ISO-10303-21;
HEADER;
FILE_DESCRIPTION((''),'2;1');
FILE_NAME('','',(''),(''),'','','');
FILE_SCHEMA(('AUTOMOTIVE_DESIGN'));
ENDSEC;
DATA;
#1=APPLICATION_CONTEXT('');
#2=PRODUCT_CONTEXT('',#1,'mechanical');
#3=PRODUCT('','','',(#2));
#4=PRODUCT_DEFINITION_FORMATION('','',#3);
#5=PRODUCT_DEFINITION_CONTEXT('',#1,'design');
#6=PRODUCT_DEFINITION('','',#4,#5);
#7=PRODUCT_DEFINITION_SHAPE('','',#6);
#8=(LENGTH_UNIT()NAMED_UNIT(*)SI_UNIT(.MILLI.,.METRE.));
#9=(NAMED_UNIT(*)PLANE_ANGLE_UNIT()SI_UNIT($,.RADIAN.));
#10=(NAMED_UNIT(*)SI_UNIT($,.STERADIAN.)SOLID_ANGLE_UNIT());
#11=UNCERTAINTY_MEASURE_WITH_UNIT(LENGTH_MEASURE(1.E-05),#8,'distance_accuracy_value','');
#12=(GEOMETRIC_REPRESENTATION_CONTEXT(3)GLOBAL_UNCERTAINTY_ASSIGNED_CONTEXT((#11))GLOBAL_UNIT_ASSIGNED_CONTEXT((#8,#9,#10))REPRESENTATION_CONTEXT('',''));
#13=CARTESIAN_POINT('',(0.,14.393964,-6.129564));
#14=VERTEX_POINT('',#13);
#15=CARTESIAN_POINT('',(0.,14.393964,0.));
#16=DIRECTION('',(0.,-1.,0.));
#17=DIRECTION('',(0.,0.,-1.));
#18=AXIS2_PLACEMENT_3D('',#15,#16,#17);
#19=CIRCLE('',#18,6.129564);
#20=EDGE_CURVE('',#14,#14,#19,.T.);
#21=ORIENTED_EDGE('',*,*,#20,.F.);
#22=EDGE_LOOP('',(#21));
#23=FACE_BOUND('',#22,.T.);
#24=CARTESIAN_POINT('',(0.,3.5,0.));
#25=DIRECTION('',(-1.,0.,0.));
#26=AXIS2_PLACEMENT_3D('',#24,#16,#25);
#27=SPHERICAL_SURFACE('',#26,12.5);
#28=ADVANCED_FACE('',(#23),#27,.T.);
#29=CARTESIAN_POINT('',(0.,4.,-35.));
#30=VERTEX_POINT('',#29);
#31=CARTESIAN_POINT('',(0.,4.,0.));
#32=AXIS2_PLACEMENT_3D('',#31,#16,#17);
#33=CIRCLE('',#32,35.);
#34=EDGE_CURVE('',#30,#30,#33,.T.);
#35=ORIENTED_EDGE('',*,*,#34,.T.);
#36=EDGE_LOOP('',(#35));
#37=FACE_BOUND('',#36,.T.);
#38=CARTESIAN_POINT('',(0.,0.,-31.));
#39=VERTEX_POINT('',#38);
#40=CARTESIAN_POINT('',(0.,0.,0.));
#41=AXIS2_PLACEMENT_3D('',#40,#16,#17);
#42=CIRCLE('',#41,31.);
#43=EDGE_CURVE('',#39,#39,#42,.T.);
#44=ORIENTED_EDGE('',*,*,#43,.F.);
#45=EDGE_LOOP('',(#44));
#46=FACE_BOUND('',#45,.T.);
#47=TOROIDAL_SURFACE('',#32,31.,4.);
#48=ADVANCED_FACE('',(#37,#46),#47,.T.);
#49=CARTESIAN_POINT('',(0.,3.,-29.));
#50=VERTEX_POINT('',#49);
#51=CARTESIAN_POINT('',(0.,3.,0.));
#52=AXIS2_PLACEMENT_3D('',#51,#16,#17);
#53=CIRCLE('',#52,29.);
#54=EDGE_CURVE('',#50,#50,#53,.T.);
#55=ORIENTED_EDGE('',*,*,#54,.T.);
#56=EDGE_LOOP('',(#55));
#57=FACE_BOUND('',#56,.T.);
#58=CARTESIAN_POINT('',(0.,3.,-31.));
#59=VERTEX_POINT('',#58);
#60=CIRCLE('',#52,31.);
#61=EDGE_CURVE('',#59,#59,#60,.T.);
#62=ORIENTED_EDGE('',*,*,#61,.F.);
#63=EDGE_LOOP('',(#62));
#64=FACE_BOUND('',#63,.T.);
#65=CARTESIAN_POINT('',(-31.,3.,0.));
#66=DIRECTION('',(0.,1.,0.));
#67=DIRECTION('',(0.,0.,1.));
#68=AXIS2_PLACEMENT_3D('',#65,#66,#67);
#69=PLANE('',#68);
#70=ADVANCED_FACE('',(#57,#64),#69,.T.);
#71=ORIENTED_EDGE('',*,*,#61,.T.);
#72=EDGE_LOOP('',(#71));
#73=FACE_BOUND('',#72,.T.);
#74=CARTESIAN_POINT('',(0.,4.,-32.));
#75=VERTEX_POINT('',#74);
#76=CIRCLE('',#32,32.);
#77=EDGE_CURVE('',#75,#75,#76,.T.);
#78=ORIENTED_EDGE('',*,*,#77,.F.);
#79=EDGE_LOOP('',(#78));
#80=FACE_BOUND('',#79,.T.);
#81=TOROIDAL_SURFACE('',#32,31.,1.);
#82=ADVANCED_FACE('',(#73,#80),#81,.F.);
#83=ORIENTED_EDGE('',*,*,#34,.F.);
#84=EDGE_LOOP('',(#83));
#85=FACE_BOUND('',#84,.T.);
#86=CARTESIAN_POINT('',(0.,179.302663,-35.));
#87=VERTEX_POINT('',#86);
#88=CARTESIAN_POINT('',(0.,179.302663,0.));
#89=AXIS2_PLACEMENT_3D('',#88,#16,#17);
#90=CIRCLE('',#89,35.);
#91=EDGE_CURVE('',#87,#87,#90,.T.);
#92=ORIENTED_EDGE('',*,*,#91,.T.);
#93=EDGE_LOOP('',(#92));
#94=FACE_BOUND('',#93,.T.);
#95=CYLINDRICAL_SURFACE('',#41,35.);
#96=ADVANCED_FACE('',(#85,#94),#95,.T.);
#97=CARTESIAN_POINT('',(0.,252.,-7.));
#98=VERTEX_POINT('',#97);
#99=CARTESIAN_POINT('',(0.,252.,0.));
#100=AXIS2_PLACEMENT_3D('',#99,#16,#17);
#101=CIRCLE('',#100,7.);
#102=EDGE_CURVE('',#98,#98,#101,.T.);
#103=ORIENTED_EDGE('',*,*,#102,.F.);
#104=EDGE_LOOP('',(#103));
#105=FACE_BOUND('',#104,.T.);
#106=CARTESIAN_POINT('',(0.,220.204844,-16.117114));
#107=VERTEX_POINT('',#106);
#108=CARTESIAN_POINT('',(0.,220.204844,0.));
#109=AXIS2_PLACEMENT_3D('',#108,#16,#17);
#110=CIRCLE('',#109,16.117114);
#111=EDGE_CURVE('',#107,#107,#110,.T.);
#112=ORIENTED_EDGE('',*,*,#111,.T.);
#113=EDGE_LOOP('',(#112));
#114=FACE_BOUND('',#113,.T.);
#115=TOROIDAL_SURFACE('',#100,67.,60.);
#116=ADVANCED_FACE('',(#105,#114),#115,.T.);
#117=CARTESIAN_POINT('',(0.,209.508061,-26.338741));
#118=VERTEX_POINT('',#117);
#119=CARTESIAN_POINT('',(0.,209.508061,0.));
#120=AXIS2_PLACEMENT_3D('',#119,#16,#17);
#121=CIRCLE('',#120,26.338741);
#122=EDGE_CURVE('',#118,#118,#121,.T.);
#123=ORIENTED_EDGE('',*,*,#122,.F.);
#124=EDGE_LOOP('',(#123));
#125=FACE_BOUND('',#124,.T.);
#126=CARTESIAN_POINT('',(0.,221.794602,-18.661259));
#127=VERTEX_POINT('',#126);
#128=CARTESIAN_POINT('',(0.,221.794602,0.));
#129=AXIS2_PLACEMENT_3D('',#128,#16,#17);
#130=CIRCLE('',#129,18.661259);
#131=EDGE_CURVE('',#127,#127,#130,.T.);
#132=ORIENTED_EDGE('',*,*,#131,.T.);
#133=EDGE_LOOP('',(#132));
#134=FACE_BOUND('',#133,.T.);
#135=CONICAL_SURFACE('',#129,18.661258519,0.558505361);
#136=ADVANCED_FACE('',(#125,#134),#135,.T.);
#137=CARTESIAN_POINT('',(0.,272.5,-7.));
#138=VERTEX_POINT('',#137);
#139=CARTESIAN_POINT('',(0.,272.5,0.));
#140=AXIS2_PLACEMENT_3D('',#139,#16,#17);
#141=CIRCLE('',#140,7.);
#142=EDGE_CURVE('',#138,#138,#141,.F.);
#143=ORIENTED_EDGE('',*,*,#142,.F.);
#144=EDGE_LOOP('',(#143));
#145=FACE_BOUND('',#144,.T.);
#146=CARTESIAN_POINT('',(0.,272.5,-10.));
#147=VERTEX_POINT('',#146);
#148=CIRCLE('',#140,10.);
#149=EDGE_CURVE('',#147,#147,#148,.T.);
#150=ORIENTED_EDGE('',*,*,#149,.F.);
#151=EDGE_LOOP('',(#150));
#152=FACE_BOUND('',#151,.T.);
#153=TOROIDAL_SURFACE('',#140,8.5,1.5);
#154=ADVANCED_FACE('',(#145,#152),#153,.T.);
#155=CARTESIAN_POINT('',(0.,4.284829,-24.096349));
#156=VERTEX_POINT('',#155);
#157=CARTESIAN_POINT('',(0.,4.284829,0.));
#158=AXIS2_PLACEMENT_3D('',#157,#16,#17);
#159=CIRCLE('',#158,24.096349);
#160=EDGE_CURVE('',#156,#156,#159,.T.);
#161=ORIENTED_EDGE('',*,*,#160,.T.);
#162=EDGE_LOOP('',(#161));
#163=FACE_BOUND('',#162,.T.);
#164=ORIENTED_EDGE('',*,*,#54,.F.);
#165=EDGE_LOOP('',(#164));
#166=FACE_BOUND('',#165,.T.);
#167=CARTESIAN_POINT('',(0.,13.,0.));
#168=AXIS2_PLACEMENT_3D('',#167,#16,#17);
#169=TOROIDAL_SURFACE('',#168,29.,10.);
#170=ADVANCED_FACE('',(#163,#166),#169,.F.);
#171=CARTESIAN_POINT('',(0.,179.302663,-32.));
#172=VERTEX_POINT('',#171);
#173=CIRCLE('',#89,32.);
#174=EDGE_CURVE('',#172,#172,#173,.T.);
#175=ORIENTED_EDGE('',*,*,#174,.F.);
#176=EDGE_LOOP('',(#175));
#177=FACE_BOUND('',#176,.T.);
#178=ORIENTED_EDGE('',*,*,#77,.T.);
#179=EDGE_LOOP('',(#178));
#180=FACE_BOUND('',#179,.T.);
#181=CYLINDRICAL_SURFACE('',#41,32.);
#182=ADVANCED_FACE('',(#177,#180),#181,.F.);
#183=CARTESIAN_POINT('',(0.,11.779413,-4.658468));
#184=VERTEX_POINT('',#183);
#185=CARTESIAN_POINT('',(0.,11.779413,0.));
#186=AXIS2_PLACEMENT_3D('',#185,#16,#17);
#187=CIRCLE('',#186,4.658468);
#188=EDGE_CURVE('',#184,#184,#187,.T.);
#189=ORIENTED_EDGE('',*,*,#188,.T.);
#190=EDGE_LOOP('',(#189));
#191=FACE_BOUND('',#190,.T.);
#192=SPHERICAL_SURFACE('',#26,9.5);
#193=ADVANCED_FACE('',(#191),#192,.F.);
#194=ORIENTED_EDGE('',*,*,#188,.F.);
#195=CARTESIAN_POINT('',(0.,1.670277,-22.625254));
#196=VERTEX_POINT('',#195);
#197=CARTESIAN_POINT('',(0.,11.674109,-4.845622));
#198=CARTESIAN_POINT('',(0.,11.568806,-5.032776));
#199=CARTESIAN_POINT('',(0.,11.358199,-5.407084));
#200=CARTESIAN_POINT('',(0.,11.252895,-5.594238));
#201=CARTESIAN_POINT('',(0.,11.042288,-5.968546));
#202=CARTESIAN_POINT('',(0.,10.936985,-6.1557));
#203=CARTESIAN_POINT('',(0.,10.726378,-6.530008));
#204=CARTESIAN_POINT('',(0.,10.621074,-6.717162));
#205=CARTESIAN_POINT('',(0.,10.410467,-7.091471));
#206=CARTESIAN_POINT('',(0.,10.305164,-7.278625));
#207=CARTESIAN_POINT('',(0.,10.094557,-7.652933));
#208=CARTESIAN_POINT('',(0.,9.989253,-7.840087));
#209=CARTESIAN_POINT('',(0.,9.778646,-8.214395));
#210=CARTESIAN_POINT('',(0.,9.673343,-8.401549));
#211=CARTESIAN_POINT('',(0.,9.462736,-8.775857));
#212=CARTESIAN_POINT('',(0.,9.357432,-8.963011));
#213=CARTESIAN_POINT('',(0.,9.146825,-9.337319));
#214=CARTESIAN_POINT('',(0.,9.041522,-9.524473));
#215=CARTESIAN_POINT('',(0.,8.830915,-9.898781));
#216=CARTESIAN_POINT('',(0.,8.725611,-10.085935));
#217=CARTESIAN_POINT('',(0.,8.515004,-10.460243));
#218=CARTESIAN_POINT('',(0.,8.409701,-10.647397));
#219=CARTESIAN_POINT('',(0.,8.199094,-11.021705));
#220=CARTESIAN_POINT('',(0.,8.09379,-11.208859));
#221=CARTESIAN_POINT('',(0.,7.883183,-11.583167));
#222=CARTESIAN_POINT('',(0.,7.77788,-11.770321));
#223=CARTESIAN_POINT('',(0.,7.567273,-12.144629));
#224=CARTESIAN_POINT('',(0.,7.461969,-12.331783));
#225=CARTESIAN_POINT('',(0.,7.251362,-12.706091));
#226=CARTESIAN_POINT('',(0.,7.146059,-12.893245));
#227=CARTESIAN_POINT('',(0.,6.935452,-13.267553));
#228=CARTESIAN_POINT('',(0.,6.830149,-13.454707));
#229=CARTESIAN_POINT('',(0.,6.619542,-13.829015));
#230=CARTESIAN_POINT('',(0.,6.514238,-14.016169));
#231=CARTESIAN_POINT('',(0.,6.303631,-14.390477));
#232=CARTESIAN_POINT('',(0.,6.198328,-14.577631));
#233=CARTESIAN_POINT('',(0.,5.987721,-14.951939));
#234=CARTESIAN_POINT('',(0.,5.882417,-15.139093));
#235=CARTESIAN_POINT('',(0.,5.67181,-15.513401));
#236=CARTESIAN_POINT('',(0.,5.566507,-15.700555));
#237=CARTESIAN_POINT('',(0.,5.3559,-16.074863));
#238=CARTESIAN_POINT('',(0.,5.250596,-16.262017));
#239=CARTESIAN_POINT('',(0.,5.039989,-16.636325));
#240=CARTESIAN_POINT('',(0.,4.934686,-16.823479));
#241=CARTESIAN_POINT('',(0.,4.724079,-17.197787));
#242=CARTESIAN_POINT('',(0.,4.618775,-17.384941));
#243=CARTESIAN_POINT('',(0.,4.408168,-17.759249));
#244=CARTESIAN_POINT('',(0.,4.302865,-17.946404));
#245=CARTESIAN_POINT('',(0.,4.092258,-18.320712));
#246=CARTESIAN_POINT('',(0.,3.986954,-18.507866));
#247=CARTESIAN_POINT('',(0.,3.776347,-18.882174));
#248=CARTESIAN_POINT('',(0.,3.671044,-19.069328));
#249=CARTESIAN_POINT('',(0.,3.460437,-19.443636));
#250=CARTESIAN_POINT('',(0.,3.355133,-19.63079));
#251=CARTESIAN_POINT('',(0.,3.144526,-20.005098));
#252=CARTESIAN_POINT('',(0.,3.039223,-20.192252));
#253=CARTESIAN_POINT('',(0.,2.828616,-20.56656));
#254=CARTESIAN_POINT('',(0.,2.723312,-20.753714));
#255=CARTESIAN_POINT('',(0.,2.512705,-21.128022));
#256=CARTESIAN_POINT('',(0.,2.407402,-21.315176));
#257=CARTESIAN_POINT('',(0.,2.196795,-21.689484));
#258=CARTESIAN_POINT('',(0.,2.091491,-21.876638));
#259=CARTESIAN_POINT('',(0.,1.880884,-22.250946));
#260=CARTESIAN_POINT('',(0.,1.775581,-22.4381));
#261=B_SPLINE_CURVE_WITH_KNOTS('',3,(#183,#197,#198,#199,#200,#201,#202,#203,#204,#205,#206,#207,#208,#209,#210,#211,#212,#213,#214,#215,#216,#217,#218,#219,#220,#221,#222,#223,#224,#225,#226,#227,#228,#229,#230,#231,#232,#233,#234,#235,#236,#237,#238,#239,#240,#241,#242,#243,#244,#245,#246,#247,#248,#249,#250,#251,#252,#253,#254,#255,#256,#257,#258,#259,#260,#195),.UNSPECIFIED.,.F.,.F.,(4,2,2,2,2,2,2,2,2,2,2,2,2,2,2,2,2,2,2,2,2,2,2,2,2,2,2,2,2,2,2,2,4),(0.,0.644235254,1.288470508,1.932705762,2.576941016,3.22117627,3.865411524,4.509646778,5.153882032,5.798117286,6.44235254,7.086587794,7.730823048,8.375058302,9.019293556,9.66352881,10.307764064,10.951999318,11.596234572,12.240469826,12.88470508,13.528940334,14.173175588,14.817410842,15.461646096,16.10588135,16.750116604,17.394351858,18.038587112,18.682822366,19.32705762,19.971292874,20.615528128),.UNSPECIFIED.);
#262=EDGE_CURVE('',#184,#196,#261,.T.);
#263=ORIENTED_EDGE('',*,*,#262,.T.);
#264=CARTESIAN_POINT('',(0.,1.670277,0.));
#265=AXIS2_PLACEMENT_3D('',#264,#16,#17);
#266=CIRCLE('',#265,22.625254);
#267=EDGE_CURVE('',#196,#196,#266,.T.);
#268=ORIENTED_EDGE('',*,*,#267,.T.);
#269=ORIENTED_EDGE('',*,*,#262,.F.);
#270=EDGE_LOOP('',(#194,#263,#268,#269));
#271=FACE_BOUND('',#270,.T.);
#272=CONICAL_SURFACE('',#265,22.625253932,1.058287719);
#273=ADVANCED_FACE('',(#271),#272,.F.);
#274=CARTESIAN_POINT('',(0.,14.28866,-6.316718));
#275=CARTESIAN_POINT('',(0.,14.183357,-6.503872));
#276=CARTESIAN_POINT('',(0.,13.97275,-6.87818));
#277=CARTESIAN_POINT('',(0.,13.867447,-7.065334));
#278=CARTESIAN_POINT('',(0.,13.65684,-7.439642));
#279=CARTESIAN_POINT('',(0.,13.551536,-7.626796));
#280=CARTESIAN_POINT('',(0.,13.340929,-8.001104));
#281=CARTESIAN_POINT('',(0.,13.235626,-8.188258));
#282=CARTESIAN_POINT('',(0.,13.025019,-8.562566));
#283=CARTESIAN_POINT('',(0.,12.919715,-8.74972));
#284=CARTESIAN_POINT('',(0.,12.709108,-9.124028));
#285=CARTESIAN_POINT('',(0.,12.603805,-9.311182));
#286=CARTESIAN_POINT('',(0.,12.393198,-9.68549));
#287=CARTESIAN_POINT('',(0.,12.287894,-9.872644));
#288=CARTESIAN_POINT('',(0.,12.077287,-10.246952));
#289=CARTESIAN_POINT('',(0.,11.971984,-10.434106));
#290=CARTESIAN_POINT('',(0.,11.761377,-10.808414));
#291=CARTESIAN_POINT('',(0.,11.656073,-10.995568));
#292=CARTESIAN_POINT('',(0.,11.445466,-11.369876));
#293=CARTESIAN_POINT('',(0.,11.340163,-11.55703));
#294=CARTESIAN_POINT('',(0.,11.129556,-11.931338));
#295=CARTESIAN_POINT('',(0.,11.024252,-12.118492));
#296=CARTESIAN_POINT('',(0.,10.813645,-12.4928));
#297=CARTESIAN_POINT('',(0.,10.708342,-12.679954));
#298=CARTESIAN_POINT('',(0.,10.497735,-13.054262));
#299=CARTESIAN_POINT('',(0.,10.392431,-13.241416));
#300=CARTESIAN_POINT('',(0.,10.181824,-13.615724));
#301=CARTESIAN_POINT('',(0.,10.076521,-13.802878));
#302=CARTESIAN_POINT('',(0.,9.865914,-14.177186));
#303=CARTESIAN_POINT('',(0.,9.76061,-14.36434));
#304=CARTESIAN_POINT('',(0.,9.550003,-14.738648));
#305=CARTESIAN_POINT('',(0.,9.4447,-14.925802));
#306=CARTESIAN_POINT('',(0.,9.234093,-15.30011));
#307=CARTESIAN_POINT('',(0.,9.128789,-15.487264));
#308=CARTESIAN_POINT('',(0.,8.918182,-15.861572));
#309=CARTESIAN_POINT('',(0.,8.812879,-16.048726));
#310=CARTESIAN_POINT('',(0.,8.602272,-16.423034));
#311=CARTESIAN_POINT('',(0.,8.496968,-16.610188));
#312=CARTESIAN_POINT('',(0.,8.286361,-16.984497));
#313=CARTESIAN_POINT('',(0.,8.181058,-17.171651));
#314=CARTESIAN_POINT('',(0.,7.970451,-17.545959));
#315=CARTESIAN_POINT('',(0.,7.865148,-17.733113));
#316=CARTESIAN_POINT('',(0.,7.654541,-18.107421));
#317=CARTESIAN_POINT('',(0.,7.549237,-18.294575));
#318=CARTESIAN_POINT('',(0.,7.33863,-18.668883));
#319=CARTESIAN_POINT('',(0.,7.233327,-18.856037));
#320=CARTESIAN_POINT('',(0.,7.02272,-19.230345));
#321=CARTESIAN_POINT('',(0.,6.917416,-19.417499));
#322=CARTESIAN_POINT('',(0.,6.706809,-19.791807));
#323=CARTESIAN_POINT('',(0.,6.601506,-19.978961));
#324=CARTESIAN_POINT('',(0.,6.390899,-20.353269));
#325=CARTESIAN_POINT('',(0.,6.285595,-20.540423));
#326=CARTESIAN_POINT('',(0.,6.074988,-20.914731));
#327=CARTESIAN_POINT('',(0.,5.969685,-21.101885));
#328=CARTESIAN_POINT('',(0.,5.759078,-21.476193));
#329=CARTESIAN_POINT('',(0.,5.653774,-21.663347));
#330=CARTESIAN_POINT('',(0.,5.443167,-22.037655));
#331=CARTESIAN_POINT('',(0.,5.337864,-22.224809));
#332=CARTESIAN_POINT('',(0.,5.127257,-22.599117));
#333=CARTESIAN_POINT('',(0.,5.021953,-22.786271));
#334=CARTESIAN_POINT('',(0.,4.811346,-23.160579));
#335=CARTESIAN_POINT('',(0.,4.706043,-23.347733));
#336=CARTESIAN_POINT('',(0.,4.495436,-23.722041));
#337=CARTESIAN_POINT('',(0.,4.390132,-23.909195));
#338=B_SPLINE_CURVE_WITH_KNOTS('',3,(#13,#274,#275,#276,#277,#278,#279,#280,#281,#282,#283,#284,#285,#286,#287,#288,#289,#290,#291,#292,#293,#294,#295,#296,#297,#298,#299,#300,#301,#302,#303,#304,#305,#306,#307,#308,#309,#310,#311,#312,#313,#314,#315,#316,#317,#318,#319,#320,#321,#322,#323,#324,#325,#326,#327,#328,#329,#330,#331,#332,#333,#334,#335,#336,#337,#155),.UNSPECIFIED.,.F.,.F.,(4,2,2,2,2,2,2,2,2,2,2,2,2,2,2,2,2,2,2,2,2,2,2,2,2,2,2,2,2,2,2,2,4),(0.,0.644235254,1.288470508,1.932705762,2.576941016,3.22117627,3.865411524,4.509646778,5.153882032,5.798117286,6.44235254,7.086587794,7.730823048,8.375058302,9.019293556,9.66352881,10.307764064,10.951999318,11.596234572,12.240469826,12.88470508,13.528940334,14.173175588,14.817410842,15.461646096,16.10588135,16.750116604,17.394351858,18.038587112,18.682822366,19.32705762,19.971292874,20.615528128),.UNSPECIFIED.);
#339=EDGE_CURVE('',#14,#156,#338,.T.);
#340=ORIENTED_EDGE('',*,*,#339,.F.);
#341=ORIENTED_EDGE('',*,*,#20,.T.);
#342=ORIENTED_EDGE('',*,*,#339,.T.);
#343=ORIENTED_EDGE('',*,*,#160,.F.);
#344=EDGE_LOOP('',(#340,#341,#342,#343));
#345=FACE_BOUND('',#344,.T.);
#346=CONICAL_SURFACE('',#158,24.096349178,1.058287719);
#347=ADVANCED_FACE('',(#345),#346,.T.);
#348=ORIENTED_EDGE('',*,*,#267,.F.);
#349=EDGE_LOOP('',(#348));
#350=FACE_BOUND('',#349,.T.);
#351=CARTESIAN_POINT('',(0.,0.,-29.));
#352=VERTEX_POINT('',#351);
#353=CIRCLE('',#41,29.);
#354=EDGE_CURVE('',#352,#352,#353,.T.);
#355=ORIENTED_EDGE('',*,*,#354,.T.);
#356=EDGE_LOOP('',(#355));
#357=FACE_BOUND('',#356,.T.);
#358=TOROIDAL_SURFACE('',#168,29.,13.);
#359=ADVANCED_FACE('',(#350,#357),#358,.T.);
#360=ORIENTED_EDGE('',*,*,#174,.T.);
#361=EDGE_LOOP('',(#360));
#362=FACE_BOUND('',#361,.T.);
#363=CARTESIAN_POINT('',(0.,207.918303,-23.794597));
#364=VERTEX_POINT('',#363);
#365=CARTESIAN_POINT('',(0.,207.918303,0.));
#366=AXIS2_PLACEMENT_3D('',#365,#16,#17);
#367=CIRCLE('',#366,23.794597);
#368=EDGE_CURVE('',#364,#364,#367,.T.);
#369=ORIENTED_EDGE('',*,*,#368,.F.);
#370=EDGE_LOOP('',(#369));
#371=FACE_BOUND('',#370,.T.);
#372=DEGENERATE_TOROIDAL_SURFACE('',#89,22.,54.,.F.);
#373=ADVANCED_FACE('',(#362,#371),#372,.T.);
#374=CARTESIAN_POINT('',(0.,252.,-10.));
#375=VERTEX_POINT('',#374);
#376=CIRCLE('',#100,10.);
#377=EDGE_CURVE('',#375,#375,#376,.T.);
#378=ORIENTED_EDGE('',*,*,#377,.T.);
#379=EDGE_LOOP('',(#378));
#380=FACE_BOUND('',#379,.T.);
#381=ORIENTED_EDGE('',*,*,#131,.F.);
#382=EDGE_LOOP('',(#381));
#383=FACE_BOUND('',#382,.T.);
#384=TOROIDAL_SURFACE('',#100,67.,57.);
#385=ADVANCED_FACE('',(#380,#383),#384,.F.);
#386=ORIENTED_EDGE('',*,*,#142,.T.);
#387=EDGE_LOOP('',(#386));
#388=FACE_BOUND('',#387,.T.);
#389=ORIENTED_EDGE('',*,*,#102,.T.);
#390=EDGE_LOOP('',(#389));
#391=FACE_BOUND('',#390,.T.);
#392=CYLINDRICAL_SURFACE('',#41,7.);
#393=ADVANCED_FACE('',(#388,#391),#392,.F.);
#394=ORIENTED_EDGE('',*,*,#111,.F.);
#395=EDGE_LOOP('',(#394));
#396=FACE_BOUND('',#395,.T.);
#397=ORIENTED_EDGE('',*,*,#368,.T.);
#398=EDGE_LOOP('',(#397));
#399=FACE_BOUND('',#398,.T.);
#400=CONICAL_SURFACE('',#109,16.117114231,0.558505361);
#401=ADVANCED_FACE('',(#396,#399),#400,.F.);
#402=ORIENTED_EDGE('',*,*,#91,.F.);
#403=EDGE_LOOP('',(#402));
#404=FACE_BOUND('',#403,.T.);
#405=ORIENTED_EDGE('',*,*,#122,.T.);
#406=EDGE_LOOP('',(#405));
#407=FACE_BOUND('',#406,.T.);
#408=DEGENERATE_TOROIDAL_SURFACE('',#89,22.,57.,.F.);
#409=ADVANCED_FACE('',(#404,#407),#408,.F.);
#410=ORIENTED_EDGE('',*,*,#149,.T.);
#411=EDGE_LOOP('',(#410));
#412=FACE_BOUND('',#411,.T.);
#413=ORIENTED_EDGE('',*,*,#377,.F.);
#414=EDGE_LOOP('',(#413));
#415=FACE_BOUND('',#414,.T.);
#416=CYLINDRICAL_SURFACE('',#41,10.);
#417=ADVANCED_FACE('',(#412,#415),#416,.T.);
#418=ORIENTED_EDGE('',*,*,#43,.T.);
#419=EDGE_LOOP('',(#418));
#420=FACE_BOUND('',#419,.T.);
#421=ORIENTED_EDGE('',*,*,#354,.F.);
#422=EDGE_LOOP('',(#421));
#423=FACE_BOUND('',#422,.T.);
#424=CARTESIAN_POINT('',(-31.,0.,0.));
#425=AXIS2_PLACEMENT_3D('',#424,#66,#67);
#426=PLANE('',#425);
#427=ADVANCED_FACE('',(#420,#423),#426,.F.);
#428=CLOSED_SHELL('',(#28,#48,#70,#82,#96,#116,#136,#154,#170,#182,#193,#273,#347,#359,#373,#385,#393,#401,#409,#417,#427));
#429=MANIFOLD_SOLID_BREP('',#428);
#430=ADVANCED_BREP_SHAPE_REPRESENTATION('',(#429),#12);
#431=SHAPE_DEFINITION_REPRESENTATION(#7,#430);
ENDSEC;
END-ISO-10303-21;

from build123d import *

# Parameters (mm, degrees)
SHELL1_T  = -3
FILLET1_R = 1.5


with BuildPart() as part:
    # Sketch2 → Revolve1 (revolve)
    with BuildSketch(Plane.XY, mode=Mode.PRIVATE) as revolve1_sk:
        with BuildLine():
            Line((0, 274), (-10, 274))
            Line((-10, 274), (-10, 252))
            ThreePointArc((-10, 252), (-12.208083332, 236.288670718), (-18.661258519, 221.794601939))
            Line((-18.661258519, 221.794601939), (-26.338741481, 209.508060859))
            ThreePointArc((-26.338741481, 209.508060859), (-32.791916668, 195.013992079), (-35, 179.302662797))
            Line((-35, 179.302662797), (-35, 4))
            ThreePointArc((-35, 4), (-33.828427125, 1.171572875), (-31, 0))
            Line((-31, 0), (-29, 0))
            ThreePointArc((-29, 0), (-25.705033601, 0.424500152), (-22.625253932, 1.670277472))
            Line((-22.625253932, 1.670277472), (-4.658468281, 11.779412617))
            ThreePointArc((-4.658468281, 11.779412617), (-2.40786006, 12.689788351), (0, 13))
            Line((0, 13), (0, 274))
        make_face()
    revolve(revolve1_sk.sketch.rotate(Axis((0, 0, 0), (0, 1, 0)), 270), axis=Axis((0, 0, 0), (0, 1, 0)))

    # Shell1
    shell1_openings = [part.faces().sort_by_distance(p)[0] for p in [
        (0, 274, 0),
    ]]
    offset(amount=SHELL1_T, openings=shell1_openings, kind=Kind.INTERSECTION)

    # Fillet1
    fillet1_edges = [part.edges().sort_by_distance(p)[0] for p in [
        (0, 274, 7),
        (0, 274, 10),
    ]]
    fillet(fillet1_edges, radius=FILLET1_R - 0.0001)  # a hair under: the kernel refuses the full size


solid = part.part
